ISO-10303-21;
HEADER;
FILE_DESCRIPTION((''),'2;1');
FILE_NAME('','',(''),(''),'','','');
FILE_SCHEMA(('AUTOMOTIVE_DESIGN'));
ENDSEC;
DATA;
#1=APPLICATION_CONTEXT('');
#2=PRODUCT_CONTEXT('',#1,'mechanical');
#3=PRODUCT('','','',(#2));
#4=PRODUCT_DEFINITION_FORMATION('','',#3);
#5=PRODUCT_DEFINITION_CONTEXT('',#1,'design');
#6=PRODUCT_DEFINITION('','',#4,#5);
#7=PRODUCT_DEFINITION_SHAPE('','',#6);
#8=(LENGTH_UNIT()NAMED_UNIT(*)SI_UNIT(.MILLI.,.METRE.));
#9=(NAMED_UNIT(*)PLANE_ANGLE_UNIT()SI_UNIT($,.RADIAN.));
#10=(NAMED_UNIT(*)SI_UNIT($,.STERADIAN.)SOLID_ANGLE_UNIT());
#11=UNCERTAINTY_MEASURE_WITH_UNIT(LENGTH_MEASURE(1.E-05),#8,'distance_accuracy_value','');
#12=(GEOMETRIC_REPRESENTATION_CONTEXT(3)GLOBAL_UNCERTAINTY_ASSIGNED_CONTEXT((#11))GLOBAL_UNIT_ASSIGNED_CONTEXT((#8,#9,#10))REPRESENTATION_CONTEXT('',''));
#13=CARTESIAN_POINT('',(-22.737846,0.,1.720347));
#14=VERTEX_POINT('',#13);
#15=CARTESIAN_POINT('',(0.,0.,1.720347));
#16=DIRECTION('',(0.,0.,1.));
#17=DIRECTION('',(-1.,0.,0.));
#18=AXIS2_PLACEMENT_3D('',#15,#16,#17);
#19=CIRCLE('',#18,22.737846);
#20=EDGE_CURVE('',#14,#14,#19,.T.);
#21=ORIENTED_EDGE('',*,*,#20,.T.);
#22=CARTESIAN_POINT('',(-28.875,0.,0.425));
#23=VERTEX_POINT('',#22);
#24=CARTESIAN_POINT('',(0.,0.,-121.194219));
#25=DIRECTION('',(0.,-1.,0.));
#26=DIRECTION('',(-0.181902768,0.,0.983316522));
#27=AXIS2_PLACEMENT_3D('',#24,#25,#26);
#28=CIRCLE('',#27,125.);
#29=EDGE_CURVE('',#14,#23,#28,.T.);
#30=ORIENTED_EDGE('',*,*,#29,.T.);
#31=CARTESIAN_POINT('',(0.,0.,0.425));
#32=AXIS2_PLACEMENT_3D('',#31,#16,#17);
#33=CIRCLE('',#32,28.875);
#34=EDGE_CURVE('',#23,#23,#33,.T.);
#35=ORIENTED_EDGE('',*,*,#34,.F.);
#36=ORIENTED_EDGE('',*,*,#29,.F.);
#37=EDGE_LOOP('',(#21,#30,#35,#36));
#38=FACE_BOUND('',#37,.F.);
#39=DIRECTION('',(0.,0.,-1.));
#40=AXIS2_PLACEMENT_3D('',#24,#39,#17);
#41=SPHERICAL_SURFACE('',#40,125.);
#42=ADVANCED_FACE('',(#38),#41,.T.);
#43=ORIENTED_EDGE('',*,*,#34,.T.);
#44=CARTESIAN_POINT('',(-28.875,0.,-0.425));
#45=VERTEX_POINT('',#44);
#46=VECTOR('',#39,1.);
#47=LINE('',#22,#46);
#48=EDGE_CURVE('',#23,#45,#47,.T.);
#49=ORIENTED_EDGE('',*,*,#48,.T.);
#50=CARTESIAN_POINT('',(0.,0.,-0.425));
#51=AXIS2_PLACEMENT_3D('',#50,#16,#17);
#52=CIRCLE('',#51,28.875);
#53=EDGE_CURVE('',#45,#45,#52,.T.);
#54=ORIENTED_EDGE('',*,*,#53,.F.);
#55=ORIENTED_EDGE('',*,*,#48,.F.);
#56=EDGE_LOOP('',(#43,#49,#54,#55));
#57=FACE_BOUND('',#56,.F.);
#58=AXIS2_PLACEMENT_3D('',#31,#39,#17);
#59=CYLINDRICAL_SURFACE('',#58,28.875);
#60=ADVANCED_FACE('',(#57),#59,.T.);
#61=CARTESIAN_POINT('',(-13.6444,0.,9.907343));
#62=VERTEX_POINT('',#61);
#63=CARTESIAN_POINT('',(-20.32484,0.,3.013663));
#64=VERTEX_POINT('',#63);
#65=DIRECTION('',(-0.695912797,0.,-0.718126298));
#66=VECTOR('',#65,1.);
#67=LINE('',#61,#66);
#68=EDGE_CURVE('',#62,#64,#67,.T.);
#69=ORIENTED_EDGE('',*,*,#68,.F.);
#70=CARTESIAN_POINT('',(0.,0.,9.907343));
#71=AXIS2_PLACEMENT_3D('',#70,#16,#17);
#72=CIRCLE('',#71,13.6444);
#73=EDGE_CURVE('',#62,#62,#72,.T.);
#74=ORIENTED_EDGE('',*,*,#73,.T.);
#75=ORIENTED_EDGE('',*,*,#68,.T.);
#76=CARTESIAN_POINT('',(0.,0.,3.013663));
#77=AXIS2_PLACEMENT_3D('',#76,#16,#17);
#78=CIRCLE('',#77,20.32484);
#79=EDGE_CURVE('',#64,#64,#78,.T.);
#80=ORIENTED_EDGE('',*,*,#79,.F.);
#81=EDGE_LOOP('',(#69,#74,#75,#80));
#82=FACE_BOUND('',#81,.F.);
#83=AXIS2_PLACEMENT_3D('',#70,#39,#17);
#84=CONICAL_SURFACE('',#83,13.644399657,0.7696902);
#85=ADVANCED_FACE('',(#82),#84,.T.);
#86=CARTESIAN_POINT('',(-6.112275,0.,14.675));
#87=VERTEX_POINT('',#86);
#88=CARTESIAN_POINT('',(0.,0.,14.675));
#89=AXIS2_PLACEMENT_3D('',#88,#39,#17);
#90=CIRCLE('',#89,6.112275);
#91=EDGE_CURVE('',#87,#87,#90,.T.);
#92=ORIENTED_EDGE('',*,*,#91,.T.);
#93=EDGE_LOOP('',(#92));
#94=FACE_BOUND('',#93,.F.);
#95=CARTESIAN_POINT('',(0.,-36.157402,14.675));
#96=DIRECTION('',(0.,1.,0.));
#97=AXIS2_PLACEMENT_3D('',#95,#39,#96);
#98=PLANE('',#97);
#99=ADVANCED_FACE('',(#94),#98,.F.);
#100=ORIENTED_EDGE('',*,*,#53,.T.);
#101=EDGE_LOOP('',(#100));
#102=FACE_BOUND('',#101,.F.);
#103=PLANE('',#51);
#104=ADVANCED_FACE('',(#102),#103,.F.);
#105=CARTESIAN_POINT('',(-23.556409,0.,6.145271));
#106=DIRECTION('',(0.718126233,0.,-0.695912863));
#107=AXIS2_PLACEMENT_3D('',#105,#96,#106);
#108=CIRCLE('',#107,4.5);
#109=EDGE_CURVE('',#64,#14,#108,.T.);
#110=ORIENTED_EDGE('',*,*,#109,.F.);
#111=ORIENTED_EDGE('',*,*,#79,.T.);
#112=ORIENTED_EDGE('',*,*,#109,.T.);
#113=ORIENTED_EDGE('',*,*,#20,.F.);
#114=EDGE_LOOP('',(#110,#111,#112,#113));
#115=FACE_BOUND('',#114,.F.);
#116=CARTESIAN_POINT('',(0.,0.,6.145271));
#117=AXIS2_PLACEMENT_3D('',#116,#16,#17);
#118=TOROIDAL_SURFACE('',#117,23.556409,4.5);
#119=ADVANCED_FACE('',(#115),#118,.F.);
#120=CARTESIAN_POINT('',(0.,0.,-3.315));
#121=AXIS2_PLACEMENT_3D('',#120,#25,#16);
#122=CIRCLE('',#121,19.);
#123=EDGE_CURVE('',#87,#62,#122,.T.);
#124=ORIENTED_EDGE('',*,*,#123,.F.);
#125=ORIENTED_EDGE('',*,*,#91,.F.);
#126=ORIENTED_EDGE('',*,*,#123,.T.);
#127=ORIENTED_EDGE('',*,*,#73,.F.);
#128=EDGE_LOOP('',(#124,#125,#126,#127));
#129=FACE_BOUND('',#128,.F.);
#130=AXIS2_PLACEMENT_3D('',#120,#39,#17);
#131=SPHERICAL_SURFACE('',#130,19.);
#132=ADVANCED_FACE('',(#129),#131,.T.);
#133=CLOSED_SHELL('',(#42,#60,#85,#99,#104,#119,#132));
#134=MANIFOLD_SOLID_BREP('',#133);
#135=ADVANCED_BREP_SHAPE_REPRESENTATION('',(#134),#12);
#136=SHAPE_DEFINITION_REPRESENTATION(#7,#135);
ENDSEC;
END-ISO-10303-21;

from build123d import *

# Parameters (mm, degrees)
F3_DEPTH = 12.5


with BuildPart() as f1:
    # F0 (on Front) → F1 (revolve)
    with BuildSketch(Plane.XZ):
        with BuildLine():
            ThreePointArc((-18.0916087155, 2.4896269549), (-9.0697101385, 3.4763084496), (0, 3.8057812268))
            Line((0, 3.8057812268), (0, 15.685))
            ThreePointArc((0, 15.685), (-7.408626068, 14.1810641227), (-13.6443996575, 9.9073431353))
            ThreePointArc((-13.6443996575, 9.9073431353), (-16.295679955, 6.4548932852), (-18.0916087155, 2.4896269549))
        make_face()
        with BuildLine():
            ThreePointArc((-21.3346085291, 1.9716631865), (-19.7148097422, 2.2412958765), (-18.0916087155, 2.4896269549))
            ThreePointArc((-18.0916087155, 2.4896269549), (-16.295679955, 6.4548932852), (-13.6443996575, 9.9073431353))
            Line((-13.6443996575, 9.9073431353), (-20.3248404986, 3.0136629614))
            Line((-20.3248404986, 3.0136629614), (-21.3346085291, 1.9716631865))
        make_face()
        with BuildLine():
            ThreePointArc((-22.7378459416, 1.7203465229), (-25.8145491381, 1.1111738013), (-28.875, 0.425))
            Line((-28.875, 0.425), (-18.6282688407, 0.425))
            ThreePointArc((-18.6282688407, 0.425), (-18.3889375183, 1.464851143), (-18.0916087155, 2.4896269549))
            ThreePointArc((-18.0916087155, 2.4896269549), (-19.7148097422, 2.2412958765), (-21.3346085291, 1.9716631865))
            ThreePointArc((-21.3346085291, 1.9716631865), (-22.0365855065, 1.848005277), (-22.7378459416, 1.7203465229))
        make_face()
        Polygon((-28.875, -0.425), (0, -0.425), (0, 0), (0, 0.425), (-18.6282688407, 0.425), (-28.875, 0.425), align=None)
        with BuildLine():
            ThreePointArc((-20.3248404986, 3.0136629614), (-21.4306013049, 2.1790454907), (-22.7378459416, 1.7203465229))
            ThreePointArc((-22.7378459416, 1.7203465229), (-22.0365855065, 1.848005277), (-21.3346085291, 1.9716631865))
            Line((-21.3346085291, 1.9716631865), (-20.3248404986, 3.0136629614))
        make_face()
        with BuildLine():
            Line((-18.6282688407, 0.425), (0, 0.425))
            Line((0, 0.425), (0, 3.8057812268))
            ThreePointArc((0, 3.8057812268), (-9.0697101385, 3.4763084496), (-18.0916087155, 2.4896269549))
            ThreePointArc((-18.0916087155, 2.4896269549), (-18.3889375183, 1.464851143), (-18.6282688407, 0.425))
        make_face()
    revolve(axis=Axis((0, 0, 10.397832983), (0, 0, 1)))

    # F2 (on Right) → F3 (cut, symmetric)
    with BuildSketch(Plane.YZ):
        Polygon((-34.8162702815, 14.675), (27.6827993542, 14.675), (-3.9353072157, 26.7957725373), (-36.1574023472, 14.675), align=None)
    extrude(amount=F3_DEPTH, both=True, mode=Mode.SUBTRACT)


solid = f1.part
